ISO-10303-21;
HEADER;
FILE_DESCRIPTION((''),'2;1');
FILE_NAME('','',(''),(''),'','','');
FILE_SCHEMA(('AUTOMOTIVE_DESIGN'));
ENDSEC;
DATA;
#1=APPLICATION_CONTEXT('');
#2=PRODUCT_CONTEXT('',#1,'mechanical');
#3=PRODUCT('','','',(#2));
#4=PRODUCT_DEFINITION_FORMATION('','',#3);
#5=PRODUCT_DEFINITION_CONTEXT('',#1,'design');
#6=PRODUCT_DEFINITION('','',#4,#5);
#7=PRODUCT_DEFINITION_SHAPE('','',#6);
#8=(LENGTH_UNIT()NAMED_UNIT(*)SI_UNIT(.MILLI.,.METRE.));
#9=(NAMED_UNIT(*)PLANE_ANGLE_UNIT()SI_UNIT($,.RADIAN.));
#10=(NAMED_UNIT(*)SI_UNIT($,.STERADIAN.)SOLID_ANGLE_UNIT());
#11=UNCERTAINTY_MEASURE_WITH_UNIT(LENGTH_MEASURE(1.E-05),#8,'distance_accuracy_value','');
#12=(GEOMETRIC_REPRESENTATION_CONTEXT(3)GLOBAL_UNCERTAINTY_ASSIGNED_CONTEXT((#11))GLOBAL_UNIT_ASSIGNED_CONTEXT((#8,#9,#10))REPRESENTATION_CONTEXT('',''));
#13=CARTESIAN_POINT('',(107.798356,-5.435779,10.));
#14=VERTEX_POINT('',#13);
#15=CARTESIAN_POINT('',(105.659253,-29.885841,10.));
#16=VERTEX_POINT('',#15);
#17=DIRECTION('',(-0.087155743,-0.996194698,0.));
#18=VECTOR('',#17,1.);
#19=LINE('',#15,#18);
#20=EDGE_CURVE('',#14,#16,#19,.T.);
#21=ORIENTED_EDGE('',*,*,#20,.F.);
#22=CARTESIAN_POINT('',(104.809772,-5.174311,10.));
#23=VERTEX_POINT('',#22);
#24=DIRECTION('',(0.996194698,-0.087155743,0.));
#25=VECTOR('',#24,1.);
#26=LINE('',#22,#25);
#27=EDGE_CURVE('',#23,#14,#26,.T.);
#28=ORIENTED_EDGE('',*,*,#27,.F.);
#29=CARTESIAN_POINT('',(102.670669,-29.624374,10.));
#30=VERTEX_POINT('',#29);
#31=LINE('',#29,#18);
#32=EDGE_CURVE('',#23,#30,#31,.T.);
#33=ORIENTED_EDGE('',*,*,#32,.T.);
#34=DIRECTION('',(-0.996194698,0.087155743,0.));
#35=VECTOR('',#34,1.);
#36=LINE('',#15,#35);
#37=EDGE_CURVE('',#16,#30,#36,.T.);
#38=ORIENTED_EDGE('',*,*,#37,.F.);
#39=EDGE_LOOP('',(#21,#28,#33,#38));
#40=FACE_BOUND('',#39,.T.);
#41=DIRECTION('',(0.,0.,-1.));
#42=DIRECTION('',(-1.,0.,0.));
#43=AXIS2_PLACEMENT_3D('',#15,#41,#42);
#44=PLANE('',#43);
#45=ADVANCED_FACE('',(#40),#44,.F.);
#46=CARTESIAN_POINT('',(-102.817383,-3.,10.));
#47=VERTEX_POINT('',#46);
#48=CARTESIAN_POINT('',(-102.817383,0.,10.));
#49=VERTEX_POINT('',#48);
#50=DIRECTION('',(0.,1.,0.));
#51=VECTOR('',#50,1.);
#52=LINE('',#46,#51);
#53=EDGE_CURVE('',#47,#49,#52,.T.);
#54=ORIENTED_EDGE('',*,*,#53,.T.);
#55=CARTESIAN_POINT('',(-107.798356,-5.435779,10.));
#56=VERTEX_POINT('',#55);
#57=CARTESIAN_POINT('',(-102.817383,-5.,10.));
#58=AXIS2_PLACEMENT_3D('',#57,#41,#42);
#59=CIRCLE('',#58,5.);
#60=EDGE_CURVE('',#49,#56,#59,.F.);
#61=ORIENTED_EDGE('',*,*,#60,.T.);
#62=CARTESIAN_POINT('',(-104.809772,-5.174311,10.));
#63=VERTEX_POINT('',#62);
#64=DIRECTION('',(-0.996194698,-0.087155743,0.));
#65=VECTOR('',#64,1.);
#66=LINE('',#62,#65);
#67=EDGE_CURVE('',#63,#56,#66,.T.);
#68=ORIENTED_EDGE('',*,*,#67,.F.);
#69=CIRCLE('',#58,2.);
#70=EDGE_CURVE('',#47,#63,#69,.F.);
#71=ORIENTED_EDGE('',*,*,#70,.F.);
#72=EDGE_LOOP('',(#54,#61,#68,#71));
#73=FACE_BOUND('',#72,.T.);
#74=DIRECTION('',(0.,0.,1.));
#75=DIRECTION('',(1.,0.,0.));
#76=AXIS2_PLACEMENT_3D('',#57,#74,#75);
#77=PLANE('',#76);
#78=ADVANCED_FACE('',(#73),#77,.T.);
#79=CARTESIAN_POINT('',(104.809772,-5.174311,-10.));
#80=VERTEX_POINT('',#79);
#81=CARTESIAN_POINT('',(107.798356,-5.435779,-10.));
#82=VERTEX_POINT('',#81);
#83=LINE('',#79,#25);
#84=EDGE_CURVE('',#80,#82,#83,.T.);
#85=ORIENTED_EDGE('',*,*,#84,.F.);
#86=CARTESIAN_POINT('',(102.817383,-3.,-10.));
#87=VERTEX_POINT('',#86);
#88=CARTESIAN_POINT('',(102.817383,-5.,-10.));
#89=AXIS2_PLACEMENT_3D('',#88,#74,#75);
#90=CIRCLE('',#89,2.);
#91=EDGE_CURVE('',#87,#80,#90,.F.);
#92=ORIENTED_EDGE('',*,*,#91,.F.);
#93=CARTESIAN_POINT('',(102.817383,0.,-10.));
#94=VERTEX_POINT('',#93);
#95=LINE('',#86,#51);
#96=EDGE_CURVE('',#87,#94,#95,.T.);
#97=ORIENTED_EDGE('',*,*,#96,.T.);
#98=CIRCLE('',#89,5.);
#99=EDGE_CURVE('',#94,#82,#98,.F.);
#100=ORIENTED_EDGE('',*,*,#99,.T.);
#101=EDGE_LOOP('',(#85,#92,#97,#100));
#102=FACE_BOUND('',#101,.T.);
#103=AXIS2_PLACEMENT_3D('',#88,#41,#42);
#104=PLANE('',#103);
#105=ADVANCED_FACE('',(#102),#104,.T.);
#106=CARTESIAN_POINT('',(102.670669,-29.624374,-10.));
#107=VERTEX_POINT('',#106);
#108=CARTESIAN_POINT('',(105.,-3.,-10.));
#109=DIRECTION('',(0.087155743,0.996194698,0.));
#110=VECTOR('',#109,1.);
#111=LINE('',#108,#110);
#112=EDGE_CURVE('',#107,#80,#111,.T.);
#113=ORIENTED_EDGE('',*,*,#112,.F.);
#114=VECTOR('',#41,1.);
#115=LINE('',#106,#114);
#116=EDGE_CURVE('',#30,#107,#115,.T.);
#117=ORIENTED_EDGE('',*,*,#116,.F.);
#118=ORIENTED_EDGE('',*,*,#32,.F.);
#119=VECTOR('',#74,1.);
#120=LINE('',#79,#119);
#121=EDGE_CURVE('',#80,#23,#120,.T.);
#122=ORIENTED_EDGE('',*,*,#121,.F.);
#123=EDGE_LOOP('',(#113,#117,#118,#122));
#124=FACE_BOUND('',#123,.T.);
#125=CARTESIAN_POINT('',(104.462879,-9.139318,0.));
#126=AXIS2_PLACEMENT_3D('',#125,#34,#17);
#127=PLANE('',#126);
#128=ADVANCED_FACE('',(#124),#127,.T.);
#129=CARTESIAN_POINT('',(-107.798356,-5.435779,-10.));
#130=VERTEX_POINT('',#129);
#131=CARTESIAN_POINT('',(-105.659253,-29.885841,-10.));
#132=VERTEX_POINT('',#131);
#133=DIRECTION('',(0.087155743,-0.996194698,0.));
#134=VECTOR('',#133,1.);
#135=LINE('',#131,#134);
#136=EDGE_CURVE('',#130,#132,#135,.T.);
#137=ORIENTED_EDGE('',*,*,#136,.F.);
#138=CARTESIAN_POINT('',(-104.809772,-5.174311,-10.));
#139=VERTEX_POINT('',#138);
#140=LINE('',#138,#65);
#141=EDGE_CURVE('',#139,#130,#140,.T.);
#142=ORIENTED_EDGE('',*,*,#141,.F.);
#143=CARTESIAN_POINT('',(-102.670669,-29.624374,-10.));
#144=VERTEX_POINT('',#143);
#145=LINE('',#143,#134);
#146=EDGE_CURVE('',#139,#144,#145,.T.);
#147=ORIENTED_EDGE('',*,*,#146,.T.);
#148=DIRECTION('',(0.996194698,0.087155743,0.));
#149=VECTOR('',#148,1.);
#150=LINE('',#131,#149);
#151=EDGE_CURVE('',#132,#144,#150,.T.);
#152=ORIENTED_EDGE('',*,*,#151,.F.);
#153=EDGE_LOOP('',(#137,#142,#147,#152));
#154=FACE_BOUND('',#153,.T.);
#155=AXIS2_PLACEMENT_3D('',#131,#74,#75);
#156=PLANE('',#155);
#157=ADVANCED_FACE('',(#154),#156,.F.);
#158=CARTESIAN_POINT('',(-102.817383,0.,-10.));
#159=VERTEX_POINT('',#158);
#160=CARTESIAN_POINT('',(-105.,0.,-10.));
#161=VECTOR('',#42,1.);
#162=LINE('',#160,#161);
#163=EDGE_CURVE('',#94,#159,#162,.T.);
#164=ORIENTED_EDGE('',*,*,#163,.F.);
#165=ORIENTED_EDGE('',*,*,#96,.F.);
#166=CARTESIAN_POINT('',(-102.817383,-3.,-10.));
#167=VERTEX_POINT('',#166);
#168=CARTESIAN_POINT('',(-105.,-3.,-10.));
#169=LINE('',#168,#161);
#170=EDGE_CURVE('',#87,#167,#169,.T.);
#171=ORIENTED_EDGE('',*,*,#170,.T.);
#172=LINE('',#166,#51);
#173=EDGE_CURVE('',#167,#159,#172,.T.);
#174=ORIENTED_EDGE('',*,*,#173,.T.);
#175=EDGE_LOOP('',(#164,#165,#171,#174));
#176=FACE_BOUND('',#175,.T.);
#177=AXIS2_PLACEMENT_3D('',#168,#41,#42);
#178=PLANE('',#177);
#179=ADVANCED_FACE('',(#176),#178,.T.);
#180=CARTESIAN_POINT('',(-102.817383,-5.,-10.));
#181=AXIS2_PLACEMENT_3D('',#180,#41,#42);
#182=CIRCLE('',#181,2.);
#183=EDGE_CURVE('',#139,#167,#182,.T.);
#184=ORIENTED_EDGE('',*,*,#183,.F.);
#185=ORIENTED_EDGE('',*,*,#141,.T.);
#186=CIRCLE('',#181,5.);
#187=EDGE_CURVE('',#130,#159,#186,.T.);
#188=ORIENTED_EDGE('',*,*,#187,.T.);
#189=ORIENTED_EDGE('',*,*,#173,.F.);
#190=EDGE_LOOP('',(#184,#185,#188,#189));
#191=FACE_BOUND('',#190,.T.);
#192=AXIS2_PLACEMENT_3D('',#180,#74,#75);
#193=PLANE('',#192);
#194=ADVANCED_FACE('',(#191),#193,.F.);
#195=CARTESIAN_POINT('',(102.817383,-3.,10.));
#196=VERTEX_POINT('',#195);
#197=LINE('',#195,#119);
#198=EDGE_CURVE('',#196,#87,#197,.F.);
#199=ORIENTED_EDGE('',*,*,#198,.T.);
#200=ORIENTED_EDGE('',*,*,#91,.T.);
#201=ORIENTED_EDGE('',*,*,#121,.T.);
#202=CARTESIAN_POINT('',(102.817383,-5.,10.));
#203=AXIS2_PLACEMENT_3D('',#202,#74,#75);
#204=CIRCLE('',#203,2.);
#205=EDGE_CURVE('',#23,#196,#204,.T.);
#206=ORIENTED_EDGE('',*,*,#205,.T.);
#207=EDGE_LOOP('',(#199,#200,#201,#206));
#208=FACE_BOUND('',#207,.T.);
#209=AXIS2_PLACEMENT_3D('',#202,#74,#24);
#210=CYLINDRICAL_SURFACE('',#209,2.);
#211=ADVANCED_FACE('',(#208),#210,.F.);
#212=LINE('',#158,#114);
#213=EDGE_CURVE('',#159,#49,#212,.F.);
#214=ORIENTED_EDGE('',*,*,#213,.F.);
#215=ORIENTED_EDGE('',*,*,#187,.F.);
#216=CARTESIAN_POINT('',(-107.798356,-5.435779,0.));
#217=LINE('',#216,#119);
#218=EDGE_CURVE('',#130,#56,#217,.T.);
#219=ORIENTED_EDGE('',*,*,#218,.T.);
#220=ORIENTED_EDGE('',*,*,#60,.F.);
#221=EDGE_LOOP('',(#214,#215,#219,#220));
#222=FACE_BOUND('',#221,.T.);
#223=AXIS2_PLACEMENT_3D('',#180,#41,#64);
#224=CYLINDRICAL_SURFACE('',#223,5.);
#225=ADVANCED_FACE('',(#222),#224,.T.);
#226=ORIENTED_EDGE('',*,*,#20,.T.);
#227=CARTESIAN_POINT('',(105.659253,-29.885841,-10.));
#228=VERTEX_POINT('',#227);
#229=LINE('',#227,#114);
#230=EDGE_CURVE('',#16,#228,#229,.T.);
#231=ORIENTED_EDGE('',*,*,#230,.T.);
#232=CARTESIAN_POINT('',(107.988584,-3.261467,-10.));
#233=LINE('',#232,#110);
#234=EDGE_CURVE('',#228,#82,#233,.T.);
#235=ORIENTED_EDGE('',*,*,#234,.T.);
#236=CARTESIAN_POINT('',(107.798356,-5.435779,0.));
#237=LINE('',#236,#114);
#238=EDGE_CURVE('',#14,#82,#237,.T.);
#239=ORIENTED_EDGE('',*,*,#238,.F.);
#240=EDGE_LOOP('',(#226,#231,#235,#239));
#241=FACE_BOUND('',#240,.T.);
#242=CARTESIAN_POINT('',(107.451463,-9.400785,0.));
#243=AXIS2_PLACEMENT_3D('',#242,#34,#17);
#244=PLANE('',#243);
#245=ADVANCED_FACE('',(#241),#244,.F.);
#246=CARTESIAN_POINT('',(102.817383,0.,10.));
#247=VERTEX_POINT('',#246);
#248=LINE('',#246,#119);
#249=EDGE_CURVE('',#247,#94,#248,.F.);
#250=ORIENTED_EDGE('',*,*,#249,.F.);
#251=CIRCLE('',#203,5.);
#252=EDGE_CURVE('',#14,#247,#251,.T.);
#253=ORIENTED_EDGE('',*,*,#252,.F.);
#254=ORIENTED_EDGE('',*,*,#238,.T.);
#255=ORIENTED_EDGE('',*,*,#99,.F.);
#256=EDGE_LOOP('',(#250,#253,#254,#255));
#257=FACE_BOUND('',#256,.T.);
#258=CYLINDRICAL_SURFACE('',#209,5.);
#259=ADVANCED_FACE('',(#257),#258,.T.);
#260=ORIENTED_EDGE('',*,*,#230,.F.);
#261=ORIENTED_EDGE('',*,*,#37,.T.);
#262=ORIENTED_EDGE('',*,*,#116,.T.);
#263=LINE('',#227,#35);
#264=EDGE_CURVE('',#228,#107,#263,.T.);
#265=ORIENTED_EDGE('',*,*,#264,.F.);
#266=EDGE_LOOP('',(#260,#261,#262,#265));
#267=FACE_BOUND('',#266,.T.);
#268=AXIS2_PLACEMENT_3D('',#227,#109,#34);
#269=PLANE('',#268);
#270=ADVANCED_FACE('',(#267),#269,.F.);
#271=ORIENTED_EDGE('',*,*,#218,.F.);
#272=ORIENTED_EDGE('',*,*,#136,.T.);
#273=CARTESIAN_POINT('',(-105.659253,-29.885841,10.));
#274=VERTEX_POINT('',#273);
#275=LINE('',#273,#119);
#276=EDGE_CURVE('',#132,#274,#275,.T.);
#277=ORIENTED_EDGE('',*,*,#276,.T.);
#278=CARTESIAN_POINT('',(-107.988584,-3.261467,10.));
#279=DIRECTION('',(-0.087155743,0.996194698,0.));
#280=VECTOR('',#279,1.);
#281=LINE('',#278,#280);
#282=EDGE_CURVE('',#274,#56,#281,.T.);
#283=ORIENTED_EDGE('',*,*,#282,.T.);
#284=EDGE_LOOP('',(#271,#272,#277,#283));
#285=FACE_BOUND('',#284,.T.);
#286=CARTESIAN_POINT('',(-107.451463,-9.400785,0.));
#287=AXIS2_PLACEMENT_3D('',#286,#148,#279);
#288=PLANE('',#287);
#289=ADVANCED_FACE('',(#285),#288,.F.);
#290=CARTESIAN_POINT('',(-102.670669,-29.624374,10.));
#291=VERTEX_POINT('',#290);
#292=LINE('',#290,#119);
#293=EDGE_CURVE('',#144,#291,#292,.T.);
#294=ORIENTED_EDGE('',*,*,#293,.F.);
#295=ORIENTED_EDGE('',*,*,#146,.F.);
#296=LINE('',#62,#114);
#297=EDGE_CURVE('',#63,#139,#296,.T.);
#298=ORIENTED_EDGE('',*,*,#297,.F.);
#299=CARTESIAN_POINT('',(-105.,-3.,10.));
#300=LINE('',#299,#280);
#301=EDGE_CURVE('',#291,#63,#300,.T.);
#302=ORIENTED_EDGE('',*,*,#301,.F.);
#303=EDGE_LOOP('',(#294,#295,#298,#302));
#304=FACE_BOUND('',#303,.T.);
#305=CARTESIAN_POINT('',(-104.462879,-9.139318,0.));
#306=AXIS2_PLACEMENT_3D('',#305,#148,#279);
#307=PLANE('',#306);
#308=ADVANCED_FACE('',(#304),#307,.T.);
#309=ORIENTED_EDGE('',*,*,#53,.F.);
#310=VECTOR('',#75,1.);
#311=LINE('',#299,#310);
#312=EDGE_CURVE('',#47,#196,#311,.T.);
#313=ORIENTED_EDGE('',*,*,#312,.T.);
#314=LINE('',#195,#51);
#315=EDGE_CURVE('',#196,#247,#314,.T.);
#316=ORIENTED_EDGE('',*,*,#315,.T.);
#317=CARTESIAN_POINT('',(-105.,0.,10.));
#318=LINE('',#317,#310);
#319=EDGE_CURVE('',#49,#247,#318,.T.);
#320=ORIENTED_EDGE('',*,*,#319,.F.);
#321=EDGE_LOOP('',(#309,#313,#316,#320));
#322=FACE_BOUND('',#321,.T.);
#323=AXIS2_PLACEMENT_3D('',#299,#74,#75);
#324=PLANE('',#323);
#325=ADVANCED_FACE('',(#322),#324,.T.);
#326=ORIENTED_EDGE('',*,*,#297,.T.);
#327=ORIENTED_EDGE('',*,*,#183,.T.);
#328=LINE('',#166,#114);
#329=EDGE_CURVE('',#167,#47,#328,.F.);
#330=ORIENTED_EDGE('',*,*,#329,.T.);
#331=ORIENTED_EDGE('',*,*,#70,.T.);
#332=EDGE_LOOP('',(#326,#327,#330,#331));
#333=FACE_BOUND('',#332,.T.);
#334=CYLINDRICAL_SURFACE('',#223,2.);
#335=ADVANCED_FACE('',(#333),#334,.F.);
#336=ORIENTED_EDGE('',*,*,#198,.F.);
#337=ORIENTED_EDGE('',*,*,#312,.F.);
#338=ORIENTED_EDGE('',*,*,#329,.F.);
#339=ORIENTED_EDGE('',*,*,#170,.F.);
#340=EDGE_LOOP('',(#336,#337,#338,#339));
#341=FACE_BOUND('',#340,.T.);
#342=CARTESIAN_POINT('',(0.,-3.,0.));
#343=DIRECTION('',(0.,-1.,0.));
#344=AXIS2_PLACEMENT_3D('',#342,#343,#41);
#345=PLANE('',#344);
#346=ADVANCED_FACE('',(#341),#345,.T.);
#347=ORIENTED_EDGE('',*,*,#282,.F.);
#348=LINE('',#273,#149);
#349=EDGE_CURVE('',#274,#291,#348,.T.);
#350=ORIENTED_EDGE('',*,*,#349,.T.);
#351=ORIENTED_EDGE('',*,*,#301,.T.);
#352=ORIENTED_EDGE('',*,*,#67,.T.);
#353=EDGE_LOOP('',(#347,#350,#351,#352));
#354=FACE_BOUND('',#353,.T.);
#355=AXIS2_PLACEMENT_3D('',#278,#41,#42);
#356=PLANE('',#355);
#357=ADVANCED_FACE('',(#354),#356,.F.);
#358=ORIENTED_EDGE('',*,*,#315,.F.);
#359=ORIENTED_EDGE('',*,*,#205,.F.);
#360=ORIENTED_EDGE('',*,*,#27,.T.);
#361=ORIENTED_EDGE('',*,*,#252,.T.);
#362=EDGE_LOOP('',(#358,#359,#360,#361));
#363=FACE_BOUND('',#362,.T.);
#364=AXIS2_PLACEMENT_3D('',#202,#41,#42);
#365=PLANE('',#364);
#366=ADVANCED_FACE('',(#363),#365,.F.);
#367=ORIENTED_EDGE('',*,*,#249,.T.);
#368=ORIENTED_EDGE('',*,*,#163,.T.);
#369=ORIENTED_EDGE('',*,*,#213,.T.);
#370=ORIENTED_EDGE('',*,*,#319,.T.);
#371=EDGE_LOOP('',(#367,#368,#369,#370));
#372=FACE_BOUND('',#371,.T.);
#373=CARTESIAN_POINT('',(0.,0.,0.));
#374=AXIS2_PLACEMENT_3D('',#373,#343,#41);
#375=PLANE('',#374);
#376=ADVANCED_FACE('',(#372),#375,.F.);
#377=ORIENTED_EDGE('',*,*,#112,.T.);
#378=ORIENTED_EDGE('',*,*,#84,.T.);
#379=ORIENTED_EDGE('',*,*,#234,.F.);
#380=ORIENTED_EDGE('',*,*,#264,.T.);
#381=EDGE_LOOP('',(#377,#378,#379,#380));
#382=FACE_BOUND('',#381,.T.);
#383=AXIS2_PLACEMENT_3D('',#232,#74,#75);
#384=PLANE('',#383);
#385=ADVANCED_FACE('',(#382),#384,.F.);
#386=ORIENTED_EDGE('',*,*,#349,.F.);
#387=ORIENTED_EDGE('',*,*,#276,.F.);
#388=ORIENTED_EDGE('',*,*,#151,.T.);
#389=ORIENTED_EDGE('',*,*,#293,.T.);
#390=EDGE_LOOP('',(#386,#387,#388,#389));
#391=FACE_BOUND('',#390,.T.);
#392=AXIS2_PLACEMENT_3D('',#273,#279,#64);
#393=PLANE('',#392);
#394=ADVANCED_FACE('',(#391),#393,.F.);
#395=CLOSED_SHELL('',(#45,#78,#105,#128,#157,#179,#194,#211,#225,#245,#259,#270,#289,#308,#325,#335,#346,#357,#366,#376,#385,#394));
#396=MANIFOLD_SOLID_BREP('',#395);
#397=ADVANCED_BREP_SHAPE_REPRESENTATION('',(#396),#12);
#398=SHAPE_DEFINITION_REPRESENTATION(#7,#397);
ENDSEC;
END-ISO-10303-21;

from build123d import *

# Parameters (mm, degrees)
SKETCH1_W                      = 210
SKETCH1_H                      = 20
BASE_FLANGE1_DEPTH             = 3
EDGE_FLANGE1_STRIP_CUT_DEPTH   = 20
EDGE_FLANGE1_STRIP_CUT_2_DEPTH = 20
EDGE_FLANGE1_DEPTH             = 20
EDGE_FLANGE1_BEND_DEPTH        = 20


# Sheet-metal steps are written as plain solids
with BuildPart() as part:
    # Sketch1 → Base-Flange1 (new body)
    with BuildSketch(Plane(origin=(0, 0, 0), x_dir=(1, 0, 0), z_dir=(0, 1, 0))):
        Rectangle(SKETCH1_W, SKETCH1_H)
    extrude(amount=-BASE_FLANGE1_DEPTH)

    # Edge-Flange1 strip (across the edge) → Edge-Flange1 strip cut (cut)
    with BuildSketch(Plane(origin=(-105, -3, 10), x_dir=(0.9961946980917459, 0.08715574274765482, 0), z_dir=(0, 0, -1))):
        Polygon((-14.95871317, -4.320177336), (2.435778714, -2.798356488), (2.174311485, 0.190227606), (-15.220180398, -1.331593242), align=None)
    extrude(amount=EDGE_FLANGE1_STRIP_CUT_DEPTH, mode=Mode.SUBTRACT)

    # Edge-Flange1 strip 2 (across the edge) → Edge-Flange1 strip cut 2 (cut)
    with BuildSketch(Plane(origin=(105, -3, -10), x_dir=(-0.9961946980917459, 0.08715574274765482, 0), z_dir=(0, 0, 1))):
        Polygon((-14.95871317, -4.320177336), (2.435778714, -2.798356488), (2.174311485, 0.190227606), (-15.220180398, -1.331593242), align=None)
    extrude(amount=EDGE_FLANGE1_STRIP_CUT_2_DEPTH, mode=Mode.SUBTRACT)

    # Edge-Flange1 section (across the edge) → Edge-Flange1 (add)
    with BuildSketch(Plane(origin=(-105, -3, 10), x_dir=(0.9961946980917459, 0.08715574274765482, 0), z_dir=(0, 0, -1))):
        with BuildLine():
            Line((-3, 2.182617002), (-3, 26.726074497))
            Line((-3, 26.726074497), (0, 26.726074497))
            Line((0, 26.726074497), (0, 2.182617002))
            ThreePointArc((0, 2.182617002), (0.648819585, 0.708062329), (2.174311485, 0.190227606))
            Line((2.174311485, 0.190227606), (2.435778714, -2.798356488))
            ThreePointArc((2.435778714, -2.798356488), (-1.377951038, -1.503769682), (-3, 2.182617002))
        make_face()
    extrude(amount=EDGE_FLANGE1_DEPTH)

    # Edge-Flange1 section 2 (across the edge) → Edge-Flange1 bend (add)
    with BuildSketch(Plane(origin=(105, -3, -10), x_dir=(-0.9961946980917459, 0.08715574274765482, 0), z_dir=(0, 0, 1))):
        with BuildLine():
            Line((-3, 2.182617002), (-3, 26.726074497))
            Line((-3, 26.726074497), (0, 26.726074497))
            Line((0, 26.726074497), (0, 2.182617002))
            ThreePointArc((0, 2.182617002), (0.648819585, 0.708062329), (2.174311485, 0.190227606))
            Line((2.174311485, 0.190227606), (2.435778714, -2.798356488))
            ThreePointArc((2.435778714, -2.798356488), (-1.377951038, -1.503769682), (-3, 2.182617002))
        make_face()
    extrude(amount=EDGE_FLANGE1_BEND_DEPTH)


solid = part.part
